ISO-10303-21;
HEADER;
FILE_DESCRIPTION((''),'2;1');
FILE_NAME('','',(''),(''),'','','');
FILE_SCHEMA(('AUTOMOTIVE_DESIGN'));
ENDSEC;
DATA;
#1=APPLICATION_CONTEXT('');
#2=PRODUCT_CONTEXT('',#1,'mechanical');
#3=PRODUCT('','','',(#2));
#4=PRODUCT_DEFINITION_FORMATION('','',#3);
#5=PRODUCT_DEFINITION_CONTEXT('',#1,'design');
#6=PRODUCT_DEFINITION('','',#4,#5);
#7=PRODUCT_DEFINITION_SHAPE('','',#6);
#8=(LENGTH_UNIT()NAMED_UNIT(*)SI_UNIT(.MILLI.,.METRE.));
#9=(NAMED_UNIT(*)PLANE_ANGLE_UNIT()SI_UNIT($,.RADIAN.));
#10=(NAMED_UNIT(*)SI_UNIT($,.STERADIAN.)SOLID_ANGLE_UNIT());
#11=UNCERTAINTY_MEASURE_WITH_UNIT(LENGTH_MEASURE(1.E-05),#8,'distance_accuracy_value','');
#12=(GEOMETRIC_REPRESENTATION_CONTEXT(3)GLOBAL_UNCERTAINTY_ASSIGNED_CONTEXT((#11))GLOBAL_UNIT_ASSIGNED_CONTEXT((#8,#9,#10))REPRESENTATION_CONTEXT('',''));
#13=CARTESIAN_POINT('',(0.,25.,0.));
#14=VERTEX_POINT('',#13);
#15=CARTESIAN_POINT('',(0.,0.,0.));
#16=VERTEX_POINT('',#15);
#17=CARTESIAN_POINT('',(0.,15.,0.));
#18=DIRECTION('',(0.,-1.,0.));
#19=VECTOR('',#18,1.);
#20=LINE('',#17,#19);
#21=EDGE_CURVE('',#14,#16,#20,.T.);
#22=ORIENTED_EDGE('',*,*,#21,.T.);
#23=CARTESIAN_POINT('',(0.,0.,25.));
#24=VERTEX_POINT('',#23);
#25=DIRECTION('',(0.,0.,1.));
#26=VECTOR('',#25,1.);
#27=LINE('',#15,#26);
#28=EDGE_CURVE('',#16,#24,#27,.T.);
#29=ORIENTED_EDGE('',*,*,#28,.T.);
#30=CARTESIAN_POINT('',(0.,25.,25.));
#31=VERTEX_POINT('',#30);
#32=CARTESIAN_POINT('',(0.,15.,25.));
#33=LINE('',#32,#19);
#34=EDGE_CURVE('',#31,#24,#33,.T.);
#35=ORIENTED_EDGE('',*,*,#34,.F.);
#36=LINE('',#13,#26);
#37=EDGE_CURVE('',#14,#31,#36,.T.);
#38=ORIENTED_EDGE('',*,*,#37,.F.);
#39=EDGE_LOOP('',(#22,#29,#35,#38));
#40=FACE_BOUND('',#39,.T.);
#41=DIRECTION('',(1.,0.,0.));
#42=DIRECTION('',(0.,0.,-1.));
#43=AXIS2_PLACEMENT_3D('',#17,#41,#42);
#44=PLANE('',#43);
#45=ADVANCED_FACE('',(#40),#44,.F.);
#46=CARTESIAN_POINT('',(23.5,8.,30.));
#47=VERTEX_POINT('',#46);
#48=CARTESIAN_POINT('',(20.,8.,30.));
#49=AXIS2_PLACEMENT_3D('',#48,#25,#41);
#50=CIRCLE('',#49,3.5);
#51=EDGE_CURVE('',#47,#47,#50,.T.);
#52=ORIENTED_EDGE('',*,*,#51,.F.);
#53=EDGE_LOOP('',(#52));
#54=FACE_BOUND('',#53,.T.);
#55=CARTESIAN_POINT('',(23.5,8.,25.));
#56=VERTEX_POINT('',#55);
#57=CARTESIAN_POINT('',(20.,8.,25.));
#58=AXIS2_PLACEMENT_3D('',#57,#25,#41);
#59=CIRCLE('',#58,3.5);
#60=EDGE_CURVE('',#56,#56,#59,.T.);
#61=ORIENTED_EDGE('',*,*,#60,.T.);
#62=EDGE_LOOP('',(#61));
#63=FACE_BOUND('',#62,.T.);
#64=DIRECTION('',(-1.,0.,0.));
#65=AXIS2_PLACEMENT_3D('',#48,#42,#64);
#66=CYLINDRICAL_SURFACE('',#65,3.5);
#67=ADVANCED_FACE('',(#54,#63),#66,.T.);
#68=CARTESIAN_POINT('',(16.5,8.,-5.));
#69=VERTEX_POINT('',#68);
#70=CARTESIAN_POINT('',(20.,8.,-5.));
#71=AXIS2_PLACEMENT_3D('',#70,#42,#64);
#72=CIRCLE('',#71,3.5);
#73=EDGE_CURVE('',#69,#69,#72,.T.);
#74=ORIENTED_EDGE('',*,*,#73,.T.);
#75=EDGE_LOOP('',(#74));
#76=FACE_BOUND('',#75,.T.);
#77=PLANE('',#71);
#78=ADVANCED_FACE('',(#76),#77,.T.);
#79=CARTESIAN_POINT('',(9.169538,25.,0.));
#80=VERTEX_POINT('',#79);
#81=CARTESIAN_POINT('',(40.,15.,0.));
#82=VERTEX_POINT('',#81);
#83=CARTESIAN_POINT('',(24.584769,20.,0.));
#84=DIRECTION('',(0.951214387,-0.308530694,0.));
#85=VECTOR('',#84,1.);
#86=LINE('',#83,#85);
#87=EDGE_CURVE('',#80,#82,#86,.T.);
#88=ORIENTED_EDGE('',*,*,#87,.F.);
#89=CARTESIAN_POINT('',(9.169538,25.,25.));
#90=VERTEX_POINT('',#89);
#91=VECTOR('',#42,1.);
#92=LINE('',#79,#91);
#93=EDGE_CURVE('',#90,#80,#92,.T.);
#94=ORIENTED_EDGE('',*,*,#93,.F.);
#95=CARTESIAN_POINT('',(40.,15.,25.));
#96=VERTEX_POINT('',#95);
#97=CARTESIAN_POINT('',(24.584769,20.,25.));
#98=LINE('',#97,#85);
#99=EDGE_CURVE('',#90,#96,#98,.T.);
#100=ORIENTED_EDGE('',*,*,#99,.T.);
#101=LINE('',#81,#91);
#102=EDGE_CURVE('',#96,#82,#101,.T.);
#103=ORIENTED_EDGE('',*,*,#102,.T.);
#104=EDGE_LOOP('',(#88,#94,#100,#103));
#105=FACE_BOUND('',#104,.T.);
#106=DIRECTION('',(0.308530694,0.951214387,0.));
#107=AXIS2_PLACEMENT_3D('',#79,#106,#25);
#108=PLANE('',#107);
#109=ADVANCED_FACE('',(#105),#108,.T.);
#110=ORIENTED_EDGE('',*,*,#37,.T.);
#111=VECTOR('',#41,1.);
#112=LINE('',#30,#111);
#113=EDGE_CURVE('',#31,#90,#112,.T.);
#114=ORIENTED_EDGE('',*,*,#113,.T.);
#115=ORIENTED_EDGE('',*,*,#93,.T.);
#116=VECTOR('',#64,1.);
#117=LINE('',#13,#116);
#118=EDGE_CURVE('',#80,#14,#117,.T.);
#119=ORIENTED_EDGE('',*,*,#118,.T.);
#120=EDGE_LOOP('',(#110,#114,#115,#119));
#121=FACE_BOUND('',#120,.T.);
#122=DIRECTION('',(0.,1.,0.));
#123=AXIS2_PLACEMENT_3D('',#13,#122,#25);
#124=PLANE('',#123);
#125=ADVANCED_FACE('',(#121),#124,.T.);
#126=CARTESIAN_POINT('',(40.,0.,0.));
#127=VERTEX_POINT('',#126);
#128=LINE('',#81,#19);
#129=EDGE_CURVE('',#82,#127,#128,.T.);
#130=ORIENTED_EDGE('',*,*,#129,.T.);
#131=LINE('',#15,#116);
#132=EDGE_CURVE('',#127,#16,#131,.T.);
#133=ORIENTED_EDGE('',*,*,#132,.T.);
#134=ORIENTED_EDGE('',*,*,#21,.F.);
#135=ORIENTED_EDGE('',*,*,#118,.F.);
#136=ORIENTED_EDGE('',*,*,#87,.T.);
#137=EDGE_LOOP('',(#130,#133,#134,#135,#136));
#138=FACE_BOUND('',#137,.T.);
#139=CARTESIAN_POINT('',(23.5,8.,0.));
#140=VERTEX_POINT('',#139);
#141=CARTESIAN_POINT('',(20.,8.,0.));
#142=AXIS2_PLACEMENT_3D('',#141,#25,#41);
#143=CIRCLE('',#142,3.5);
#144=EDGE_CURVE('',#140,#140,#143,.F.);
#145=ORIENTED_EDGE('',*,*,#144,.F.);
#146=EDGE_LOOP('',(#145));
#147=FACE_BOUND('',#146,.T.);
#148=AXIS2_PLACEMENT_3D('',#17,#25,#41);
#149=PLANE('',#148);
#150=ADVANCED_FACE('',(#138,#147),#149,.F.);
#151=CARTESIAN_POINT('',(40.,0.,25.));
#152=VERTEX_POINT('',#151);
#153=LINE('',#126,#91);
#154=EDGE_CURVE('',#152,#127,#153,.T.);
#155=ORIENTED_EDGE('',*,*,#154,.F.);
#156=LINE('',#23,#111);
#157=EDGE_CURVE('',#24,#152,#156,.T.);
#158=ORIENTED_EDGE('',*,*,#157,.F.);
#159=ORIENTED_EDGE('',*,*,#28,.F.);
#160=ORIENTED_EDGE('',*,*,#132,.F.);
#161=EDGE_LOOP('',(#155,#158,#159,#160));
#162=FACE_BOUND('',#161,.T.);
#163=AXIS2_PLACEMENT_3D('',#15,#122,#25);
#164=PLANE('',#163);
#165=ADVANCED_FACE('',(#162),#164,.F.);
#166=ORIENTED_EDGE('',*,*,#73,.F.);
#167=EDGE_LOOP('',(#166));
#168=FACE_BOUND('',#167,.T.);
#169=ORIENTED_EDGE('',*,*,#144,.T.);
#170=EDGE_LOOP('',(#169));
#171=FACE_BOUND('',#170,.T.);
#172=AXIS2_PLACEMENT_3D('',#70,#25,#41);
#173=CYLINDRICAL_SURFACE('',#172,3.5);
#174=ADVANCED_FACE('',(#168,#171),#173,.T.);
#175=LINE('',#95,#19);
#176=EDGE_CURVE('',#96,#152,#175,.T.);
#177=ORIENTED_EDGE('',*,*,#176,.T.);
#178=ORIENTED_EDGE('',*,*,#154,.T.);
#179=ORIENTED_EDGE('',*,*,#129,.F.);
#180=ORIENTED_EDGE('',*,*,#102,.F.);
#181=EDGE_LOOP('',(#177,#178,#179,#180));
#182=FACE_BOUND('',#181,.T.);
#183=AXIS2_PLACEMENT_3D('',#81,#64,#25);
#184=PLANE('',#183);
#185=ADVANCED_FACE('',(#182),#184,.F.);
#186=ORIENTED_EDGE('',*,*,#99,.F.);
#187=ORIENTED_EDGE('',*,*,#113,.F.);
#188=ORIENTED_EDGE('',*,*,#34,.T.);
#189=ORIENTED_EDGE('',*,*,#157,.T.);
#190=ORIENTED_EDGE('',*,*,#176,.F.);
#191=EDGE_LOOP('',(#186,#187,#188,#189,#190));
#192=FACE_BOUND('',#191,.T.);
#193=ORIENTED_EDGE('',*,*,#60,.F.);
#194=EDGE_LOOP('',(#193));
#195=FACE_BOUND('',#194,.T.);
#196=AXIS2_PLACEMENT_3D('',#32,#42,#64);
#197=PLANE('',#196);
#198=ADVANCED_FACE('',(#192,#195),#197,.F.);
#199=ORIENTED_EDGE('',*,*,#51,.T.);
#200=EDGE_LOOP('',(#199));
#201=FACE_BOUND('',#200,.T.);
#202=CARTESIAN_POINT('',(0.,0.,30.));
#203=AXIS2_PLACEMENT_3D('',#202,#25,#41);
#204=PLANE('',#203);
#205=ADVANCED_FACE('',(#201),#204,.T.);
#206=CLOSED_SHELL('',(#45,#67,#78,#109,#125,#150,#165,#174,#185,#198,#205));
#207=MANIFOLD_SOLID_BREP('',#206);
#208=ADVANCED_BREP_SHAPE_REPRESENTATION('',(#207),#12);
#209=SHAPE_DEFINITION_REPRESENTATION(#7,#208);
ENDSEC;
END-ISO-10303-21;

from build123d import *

# Parameters (mm, degrees)
SKETCH_1_W      = 40
SKETCH_1_H      = 25
EXTRUDE_1_DEPTH = 15
SKETCH_2_W      = 9.169537909
SKETCH_2_H      = 25
EXTRUDE_2_DEPTH = 10
OTHER_1_DEPTH   = 25
SKETCH_6_R      = 3.5
EXTRUDE_3_DEPTH = 5
EXTRUDE_START   = 5
SKETCH_7_R      = 3.5
EXTRUDE_4_DEPTH = 5


# Read off the part's stored shape, not the designer's step: 边界1
with BuildPart() as part:
    # 草图1 → 凸台-拉伸1 (new body)
    with BuildSketch(Plane(origin=(0, 0, 0), x_dir=(1, 0, 0), z_dir=(0, 1, 0))):
        with Locations((20, -12.5)):
            Rectangle(SKETCH_1_W, SKETCH_1_H)
    extrude(amount=EXTRUDE_1_DEPTH)

    # 草图2 → 凸台-拉伸2 (add)
    with BuildSketch(Plane(origin=(0, 15, 0), x_dir=(1, 0, 0), z_dir=(0, 1, 0))):
        with Locations((4.584768955, -12.5)):
            Rectangle(SKETCH_2_W, SKETCH_2_H)
    extrude(amount=EXTRUDE_2_DEPTH)

    # 边界1 outline → 边界1 (add)
    with BuildSketch(Plane.XY):
        Polygon((9.169537909, 15), (40, 15), (9.169537909, 25), align=None)
    extrude(amount=OTHER_1_DEPTH)

    # 草图6 → 凸台-拉伸3 (add)
    with BuildSketch(Plane(origin=(0, 0, 0), x_dir=(-1, 0, 0), z_dir=(0, 0, -1))):
        with Locations(Location((-20, 8, 0), (0, 0, 180))):
            Circle(SKETCH_6_R)
    extrude(amount=EXTRUDE_3_DEPTH)

    # 草图7 → 凸台-拉伸4 (add)
    with BuildSketch(Plane.XY.offset(25).offset(EXTRUDE_START)):
        with Locations((20, 8)):
            Circle(SKETCH_7_R)
    extrude(amount=-EXTRUDE_4_DEPTH)


solid = part.part
